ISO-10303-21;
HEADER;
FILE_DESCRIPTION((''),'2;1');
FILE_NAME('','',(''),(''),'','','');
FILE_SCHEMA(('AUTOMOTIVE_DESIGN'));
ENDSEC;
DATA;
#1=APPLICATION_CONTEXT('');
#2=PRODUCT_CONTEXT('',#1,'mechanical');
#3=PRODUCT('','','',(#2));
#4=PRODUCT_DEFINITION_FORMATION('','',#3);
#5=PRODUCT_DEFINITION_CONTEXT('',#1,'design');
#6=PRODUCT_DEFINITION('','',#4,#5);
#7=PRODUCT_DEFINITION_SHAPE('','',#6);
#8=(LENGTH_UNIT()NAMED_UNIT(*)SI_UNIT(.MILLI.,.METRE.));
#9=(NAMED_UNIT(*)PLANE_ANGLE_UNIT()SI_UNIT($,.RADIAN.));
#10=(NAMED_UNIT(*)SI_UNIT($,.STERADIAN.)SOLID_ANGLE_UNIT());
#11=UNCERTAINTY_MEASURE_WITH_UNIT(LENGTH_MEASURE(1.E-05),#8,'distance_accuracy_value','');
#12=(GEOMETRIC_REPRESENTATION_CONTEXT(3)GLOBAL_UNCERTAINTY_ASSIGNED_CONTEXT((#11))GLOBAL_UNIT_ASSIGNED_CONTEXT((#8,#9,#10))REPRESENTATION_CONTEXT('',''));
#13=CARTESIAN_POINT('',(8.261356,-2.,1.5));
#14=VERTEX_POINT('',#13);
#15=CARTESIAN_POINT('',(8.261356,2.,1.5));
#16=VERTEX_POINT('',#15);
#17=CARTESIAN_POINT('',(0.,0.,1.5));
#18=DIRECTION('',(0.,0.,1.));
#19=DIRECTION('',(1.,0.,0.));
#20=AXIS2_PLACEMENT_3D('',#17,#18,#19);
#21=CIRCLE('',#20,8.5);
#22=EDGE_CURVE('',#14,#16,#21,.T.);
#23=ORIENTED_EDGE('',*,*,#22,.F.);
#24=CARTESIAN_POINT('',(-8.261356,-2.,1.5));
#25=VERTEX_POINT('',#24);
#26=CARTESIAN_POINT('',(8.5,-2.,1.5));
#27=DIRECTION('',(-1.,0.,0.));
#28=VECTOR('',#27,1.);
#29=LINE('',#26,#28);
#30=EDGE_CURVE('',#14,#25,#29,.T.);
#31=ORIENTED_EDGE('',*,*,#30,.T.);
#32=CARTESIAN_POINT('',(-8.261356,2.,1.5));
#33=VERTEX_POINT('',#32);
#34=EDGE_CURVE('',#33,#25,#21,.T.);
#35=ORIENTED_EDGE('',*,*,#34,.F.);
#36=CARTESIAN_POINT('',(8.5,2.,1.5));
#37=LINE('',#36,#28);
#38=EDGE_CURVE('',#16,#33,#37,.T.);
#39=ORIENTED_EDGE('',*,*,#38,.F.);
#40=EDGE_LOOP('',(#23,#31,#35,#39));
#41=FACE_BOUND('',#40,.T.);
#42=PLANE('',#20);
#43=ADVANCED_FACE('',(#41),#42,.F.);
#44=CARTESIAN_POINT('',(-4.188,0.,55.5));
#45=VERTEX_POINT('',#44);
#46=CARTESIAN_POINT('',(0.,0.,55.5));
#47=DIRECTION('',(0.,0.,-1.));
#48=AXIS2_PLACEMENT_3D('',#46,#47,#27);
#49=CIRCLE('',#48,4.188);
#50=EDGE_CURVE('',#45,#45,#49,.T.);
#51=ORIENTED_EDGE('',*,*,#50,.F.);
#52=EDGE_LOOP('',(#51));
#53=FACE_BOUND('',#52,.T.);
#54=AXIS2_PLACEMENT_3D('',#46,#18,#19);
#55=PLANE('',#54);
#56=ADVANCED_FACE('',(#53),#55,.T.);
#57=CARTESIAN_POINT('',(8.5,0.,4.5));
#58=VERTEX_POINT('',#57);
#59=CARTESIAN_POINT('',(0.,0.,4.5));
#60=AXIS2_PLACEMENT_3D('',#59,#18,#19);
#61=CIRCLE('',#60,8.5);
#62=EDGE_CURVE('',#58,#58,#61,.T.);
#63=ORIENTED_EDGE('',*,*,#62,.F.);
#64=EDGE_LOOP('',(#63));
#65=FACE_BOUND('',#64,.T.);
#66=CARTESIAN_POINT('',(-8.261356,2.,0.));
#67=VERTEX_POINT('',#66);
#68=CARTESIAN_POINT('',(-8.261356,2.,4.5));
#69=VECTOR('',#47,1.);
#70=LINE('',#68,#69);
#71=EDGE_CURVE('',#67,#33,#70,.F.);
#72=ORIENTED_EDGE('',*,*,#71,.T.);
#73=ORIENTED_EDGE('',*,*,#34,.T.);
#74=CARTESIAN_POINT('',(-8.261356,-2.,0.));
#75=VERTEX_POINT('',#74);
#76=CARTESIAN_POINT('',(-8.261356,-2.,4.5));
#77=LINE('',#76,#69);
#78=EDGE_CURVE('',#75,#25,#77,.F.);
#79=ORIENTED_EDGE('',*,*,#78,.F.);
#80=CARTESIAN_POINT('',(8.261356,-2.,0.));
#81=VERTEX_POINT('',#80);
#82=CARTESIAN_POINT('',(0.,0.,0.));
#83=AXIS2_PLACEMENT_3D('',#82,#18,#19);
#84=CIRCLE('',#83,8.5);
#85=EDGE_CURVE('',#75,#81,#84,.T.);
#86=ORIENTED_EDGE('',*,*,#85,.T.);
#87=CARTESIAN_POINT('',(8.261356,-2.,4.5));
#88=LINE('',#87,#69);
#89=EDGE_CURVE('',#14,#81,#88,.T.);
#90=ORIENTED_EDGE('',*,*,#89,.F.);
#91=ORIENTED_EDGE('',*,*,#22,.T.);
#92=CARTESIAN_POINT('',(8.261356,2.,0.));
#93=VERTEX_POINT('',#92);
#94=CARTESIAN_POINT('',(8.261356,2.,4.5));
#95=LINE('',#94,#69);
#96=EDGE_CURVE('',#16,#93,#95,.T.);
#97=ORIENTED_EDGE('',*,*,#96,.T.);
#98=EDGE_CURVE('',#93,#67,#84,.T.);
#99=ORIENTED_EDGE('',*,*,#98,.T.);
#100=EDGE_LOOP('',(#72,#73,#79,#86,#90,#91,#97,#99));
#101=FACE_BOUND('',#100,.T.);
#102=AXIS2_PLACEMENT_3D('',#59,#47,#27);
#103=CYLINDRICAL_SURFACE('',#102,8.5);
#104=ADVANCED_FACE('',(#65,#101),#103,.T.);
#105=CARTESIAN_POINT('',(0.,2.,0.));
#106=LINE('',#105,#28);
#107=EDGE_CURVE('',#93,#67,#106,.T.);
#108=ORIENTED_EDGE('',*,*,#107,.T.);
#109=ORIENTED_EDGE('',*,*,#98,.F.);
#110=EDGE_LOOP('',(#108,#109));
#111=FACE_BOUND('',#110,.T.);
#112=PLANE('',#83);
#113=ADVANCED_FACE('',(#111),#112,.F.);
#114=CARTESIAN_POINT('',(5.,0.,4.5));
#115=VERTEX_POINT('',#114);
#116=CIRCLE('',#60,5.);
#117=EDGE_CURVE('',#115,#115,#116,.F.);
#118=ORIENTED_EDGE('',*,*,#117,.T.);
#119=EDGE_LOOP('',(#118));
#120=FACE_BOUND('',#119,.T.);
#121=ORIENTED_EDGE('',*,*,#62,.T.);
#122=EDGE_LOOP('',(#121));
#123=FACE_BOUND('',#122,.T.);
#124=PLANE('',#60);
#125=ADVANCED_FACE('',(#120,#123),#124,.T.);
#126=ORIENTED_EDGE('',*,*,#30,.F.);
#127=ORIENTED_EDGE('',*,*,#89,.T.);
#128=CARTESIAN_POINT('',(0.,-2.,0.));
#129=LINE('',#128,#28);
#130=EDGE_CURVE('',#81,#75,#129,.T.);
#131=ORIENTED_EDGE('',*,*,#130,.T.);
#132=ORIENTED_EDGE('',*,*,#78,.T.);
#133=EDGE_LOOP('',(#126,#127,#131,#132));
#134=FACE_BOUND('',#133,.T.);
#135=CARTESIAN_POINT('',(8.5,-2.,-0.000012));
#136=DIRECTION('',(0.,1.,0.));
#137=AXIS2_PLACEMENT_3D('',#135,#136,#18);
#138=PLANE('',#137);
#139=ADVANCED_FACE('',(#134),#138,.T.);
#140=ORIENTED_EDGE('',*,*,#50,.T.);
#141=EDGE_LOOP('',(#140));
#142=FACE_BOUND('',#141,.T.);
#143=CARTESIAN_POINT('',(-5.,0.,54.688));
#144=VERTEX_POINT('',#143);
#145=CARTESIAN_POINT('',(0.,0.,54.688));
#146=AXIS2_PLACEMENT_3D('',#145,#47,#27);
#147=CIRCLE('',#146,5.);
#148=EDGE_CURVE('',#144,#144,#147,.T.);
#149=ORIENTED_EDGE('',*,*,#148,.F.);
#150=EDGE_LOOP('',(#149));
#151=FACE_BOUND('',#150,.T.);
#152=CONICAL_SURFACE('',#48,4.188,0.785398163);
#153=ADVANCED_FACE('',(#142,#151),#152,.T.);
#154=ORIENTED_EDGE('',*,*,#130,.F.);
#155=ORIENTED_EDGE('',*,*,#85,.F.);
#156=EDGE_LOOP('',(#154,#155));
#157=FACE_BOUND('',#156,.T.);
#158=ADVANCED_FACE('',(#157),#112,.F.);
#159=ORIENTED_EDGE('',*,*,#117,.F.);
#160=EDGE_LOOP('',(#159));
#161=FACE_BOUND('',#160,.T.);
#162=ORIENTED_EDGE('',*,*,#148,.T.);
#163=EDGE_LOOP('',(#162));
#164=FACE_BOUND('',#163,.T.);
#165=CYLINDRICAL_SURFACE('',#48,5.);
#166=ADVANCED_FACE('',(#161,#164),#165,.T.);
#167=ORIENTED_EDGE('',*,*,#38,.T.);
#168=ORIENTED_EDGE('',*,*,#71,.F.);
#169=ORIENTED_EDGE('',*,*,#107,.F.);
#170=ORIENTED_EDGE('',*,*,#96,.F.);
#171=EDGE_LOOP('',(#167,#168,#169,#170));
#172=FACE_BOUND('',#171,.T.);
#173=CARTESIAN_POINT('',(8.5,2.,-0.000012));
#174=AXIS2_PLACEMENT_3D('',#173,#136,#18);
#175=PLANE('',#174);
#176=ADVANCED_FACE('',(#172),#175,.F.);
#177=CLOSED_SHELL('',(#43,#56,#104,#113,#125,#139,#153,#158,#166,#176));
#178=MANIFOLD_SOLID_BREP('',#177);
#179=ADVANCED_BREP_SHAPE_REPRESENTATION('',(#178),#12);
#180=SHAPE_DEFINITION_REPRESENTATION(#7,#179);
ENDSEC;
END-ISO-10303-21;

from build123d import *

# Parameters (mm, degrees)
SKETCH_1_R               = 8.5
EXTRUDE_1_DEPTH          = 4.5
SKETCH_2_R               = 5
EXTRUDE_2_DEPTH          = 55.5
CUT_EXTRUDE_1_DEPTH      = 57.786882288
CUT_EXTRUDE_1_DEPTH_BACK = 1.5
SKETCH_5_W               = 17
SKETCH_5_H               = 4


# Read off the part's stored shape, not the designer's step: M10 机械螺纹 螺柱1
with BuildPart() as part:
    # 草图1 → 凸台-拉伸1 (new body)
    with BuildSketch(Plane.XY):
        Circle(SKETCH_1_R)
    extrude(amount=EXTRUDE_1_DEPTH)

    # 草图2 → 凸台-拉伸2 (add)
    with BuildSketch(Plane.XY):
        Circle(SKETCH_2_R)
    extrude(amount=EXTRUDE_2_DEPTH)

    # M10 机械螺纹 螺柱1 outline → M10 机械螺纹 螺柱1 (revolve, cut)
    with BuildSketch(Plane.XZ):
        Polygon((5, 55.5), (4.188, 55.5), (5, 54.688), align=None)
    revolve(axis=Axis((0, 0, 0), (0, 0, 1)), mode=Mode.SUBTRACT)

    # 草图5 → 切除-拉伸-薄壁1 (cut, two sides: drawn at the far end of the back side and taken through both)
    with BuildSketch(Plane(origin=(0, 0, 0), x_dir=(-1, 0, 0), z_dir=(0, 0, -1)).offset(-CUT_EXTRUDE_1_DEPTH_BACK)):
        Rectangle(SKETCH_5_W, SKETCH_5_H)
    extrude(amount=CUT_EXTRUDE_1_DEPTH + CUT_EXTRUDE_1_DEPTH_BACK, mode=Mode.SUBTRACT)


solid = part.part
